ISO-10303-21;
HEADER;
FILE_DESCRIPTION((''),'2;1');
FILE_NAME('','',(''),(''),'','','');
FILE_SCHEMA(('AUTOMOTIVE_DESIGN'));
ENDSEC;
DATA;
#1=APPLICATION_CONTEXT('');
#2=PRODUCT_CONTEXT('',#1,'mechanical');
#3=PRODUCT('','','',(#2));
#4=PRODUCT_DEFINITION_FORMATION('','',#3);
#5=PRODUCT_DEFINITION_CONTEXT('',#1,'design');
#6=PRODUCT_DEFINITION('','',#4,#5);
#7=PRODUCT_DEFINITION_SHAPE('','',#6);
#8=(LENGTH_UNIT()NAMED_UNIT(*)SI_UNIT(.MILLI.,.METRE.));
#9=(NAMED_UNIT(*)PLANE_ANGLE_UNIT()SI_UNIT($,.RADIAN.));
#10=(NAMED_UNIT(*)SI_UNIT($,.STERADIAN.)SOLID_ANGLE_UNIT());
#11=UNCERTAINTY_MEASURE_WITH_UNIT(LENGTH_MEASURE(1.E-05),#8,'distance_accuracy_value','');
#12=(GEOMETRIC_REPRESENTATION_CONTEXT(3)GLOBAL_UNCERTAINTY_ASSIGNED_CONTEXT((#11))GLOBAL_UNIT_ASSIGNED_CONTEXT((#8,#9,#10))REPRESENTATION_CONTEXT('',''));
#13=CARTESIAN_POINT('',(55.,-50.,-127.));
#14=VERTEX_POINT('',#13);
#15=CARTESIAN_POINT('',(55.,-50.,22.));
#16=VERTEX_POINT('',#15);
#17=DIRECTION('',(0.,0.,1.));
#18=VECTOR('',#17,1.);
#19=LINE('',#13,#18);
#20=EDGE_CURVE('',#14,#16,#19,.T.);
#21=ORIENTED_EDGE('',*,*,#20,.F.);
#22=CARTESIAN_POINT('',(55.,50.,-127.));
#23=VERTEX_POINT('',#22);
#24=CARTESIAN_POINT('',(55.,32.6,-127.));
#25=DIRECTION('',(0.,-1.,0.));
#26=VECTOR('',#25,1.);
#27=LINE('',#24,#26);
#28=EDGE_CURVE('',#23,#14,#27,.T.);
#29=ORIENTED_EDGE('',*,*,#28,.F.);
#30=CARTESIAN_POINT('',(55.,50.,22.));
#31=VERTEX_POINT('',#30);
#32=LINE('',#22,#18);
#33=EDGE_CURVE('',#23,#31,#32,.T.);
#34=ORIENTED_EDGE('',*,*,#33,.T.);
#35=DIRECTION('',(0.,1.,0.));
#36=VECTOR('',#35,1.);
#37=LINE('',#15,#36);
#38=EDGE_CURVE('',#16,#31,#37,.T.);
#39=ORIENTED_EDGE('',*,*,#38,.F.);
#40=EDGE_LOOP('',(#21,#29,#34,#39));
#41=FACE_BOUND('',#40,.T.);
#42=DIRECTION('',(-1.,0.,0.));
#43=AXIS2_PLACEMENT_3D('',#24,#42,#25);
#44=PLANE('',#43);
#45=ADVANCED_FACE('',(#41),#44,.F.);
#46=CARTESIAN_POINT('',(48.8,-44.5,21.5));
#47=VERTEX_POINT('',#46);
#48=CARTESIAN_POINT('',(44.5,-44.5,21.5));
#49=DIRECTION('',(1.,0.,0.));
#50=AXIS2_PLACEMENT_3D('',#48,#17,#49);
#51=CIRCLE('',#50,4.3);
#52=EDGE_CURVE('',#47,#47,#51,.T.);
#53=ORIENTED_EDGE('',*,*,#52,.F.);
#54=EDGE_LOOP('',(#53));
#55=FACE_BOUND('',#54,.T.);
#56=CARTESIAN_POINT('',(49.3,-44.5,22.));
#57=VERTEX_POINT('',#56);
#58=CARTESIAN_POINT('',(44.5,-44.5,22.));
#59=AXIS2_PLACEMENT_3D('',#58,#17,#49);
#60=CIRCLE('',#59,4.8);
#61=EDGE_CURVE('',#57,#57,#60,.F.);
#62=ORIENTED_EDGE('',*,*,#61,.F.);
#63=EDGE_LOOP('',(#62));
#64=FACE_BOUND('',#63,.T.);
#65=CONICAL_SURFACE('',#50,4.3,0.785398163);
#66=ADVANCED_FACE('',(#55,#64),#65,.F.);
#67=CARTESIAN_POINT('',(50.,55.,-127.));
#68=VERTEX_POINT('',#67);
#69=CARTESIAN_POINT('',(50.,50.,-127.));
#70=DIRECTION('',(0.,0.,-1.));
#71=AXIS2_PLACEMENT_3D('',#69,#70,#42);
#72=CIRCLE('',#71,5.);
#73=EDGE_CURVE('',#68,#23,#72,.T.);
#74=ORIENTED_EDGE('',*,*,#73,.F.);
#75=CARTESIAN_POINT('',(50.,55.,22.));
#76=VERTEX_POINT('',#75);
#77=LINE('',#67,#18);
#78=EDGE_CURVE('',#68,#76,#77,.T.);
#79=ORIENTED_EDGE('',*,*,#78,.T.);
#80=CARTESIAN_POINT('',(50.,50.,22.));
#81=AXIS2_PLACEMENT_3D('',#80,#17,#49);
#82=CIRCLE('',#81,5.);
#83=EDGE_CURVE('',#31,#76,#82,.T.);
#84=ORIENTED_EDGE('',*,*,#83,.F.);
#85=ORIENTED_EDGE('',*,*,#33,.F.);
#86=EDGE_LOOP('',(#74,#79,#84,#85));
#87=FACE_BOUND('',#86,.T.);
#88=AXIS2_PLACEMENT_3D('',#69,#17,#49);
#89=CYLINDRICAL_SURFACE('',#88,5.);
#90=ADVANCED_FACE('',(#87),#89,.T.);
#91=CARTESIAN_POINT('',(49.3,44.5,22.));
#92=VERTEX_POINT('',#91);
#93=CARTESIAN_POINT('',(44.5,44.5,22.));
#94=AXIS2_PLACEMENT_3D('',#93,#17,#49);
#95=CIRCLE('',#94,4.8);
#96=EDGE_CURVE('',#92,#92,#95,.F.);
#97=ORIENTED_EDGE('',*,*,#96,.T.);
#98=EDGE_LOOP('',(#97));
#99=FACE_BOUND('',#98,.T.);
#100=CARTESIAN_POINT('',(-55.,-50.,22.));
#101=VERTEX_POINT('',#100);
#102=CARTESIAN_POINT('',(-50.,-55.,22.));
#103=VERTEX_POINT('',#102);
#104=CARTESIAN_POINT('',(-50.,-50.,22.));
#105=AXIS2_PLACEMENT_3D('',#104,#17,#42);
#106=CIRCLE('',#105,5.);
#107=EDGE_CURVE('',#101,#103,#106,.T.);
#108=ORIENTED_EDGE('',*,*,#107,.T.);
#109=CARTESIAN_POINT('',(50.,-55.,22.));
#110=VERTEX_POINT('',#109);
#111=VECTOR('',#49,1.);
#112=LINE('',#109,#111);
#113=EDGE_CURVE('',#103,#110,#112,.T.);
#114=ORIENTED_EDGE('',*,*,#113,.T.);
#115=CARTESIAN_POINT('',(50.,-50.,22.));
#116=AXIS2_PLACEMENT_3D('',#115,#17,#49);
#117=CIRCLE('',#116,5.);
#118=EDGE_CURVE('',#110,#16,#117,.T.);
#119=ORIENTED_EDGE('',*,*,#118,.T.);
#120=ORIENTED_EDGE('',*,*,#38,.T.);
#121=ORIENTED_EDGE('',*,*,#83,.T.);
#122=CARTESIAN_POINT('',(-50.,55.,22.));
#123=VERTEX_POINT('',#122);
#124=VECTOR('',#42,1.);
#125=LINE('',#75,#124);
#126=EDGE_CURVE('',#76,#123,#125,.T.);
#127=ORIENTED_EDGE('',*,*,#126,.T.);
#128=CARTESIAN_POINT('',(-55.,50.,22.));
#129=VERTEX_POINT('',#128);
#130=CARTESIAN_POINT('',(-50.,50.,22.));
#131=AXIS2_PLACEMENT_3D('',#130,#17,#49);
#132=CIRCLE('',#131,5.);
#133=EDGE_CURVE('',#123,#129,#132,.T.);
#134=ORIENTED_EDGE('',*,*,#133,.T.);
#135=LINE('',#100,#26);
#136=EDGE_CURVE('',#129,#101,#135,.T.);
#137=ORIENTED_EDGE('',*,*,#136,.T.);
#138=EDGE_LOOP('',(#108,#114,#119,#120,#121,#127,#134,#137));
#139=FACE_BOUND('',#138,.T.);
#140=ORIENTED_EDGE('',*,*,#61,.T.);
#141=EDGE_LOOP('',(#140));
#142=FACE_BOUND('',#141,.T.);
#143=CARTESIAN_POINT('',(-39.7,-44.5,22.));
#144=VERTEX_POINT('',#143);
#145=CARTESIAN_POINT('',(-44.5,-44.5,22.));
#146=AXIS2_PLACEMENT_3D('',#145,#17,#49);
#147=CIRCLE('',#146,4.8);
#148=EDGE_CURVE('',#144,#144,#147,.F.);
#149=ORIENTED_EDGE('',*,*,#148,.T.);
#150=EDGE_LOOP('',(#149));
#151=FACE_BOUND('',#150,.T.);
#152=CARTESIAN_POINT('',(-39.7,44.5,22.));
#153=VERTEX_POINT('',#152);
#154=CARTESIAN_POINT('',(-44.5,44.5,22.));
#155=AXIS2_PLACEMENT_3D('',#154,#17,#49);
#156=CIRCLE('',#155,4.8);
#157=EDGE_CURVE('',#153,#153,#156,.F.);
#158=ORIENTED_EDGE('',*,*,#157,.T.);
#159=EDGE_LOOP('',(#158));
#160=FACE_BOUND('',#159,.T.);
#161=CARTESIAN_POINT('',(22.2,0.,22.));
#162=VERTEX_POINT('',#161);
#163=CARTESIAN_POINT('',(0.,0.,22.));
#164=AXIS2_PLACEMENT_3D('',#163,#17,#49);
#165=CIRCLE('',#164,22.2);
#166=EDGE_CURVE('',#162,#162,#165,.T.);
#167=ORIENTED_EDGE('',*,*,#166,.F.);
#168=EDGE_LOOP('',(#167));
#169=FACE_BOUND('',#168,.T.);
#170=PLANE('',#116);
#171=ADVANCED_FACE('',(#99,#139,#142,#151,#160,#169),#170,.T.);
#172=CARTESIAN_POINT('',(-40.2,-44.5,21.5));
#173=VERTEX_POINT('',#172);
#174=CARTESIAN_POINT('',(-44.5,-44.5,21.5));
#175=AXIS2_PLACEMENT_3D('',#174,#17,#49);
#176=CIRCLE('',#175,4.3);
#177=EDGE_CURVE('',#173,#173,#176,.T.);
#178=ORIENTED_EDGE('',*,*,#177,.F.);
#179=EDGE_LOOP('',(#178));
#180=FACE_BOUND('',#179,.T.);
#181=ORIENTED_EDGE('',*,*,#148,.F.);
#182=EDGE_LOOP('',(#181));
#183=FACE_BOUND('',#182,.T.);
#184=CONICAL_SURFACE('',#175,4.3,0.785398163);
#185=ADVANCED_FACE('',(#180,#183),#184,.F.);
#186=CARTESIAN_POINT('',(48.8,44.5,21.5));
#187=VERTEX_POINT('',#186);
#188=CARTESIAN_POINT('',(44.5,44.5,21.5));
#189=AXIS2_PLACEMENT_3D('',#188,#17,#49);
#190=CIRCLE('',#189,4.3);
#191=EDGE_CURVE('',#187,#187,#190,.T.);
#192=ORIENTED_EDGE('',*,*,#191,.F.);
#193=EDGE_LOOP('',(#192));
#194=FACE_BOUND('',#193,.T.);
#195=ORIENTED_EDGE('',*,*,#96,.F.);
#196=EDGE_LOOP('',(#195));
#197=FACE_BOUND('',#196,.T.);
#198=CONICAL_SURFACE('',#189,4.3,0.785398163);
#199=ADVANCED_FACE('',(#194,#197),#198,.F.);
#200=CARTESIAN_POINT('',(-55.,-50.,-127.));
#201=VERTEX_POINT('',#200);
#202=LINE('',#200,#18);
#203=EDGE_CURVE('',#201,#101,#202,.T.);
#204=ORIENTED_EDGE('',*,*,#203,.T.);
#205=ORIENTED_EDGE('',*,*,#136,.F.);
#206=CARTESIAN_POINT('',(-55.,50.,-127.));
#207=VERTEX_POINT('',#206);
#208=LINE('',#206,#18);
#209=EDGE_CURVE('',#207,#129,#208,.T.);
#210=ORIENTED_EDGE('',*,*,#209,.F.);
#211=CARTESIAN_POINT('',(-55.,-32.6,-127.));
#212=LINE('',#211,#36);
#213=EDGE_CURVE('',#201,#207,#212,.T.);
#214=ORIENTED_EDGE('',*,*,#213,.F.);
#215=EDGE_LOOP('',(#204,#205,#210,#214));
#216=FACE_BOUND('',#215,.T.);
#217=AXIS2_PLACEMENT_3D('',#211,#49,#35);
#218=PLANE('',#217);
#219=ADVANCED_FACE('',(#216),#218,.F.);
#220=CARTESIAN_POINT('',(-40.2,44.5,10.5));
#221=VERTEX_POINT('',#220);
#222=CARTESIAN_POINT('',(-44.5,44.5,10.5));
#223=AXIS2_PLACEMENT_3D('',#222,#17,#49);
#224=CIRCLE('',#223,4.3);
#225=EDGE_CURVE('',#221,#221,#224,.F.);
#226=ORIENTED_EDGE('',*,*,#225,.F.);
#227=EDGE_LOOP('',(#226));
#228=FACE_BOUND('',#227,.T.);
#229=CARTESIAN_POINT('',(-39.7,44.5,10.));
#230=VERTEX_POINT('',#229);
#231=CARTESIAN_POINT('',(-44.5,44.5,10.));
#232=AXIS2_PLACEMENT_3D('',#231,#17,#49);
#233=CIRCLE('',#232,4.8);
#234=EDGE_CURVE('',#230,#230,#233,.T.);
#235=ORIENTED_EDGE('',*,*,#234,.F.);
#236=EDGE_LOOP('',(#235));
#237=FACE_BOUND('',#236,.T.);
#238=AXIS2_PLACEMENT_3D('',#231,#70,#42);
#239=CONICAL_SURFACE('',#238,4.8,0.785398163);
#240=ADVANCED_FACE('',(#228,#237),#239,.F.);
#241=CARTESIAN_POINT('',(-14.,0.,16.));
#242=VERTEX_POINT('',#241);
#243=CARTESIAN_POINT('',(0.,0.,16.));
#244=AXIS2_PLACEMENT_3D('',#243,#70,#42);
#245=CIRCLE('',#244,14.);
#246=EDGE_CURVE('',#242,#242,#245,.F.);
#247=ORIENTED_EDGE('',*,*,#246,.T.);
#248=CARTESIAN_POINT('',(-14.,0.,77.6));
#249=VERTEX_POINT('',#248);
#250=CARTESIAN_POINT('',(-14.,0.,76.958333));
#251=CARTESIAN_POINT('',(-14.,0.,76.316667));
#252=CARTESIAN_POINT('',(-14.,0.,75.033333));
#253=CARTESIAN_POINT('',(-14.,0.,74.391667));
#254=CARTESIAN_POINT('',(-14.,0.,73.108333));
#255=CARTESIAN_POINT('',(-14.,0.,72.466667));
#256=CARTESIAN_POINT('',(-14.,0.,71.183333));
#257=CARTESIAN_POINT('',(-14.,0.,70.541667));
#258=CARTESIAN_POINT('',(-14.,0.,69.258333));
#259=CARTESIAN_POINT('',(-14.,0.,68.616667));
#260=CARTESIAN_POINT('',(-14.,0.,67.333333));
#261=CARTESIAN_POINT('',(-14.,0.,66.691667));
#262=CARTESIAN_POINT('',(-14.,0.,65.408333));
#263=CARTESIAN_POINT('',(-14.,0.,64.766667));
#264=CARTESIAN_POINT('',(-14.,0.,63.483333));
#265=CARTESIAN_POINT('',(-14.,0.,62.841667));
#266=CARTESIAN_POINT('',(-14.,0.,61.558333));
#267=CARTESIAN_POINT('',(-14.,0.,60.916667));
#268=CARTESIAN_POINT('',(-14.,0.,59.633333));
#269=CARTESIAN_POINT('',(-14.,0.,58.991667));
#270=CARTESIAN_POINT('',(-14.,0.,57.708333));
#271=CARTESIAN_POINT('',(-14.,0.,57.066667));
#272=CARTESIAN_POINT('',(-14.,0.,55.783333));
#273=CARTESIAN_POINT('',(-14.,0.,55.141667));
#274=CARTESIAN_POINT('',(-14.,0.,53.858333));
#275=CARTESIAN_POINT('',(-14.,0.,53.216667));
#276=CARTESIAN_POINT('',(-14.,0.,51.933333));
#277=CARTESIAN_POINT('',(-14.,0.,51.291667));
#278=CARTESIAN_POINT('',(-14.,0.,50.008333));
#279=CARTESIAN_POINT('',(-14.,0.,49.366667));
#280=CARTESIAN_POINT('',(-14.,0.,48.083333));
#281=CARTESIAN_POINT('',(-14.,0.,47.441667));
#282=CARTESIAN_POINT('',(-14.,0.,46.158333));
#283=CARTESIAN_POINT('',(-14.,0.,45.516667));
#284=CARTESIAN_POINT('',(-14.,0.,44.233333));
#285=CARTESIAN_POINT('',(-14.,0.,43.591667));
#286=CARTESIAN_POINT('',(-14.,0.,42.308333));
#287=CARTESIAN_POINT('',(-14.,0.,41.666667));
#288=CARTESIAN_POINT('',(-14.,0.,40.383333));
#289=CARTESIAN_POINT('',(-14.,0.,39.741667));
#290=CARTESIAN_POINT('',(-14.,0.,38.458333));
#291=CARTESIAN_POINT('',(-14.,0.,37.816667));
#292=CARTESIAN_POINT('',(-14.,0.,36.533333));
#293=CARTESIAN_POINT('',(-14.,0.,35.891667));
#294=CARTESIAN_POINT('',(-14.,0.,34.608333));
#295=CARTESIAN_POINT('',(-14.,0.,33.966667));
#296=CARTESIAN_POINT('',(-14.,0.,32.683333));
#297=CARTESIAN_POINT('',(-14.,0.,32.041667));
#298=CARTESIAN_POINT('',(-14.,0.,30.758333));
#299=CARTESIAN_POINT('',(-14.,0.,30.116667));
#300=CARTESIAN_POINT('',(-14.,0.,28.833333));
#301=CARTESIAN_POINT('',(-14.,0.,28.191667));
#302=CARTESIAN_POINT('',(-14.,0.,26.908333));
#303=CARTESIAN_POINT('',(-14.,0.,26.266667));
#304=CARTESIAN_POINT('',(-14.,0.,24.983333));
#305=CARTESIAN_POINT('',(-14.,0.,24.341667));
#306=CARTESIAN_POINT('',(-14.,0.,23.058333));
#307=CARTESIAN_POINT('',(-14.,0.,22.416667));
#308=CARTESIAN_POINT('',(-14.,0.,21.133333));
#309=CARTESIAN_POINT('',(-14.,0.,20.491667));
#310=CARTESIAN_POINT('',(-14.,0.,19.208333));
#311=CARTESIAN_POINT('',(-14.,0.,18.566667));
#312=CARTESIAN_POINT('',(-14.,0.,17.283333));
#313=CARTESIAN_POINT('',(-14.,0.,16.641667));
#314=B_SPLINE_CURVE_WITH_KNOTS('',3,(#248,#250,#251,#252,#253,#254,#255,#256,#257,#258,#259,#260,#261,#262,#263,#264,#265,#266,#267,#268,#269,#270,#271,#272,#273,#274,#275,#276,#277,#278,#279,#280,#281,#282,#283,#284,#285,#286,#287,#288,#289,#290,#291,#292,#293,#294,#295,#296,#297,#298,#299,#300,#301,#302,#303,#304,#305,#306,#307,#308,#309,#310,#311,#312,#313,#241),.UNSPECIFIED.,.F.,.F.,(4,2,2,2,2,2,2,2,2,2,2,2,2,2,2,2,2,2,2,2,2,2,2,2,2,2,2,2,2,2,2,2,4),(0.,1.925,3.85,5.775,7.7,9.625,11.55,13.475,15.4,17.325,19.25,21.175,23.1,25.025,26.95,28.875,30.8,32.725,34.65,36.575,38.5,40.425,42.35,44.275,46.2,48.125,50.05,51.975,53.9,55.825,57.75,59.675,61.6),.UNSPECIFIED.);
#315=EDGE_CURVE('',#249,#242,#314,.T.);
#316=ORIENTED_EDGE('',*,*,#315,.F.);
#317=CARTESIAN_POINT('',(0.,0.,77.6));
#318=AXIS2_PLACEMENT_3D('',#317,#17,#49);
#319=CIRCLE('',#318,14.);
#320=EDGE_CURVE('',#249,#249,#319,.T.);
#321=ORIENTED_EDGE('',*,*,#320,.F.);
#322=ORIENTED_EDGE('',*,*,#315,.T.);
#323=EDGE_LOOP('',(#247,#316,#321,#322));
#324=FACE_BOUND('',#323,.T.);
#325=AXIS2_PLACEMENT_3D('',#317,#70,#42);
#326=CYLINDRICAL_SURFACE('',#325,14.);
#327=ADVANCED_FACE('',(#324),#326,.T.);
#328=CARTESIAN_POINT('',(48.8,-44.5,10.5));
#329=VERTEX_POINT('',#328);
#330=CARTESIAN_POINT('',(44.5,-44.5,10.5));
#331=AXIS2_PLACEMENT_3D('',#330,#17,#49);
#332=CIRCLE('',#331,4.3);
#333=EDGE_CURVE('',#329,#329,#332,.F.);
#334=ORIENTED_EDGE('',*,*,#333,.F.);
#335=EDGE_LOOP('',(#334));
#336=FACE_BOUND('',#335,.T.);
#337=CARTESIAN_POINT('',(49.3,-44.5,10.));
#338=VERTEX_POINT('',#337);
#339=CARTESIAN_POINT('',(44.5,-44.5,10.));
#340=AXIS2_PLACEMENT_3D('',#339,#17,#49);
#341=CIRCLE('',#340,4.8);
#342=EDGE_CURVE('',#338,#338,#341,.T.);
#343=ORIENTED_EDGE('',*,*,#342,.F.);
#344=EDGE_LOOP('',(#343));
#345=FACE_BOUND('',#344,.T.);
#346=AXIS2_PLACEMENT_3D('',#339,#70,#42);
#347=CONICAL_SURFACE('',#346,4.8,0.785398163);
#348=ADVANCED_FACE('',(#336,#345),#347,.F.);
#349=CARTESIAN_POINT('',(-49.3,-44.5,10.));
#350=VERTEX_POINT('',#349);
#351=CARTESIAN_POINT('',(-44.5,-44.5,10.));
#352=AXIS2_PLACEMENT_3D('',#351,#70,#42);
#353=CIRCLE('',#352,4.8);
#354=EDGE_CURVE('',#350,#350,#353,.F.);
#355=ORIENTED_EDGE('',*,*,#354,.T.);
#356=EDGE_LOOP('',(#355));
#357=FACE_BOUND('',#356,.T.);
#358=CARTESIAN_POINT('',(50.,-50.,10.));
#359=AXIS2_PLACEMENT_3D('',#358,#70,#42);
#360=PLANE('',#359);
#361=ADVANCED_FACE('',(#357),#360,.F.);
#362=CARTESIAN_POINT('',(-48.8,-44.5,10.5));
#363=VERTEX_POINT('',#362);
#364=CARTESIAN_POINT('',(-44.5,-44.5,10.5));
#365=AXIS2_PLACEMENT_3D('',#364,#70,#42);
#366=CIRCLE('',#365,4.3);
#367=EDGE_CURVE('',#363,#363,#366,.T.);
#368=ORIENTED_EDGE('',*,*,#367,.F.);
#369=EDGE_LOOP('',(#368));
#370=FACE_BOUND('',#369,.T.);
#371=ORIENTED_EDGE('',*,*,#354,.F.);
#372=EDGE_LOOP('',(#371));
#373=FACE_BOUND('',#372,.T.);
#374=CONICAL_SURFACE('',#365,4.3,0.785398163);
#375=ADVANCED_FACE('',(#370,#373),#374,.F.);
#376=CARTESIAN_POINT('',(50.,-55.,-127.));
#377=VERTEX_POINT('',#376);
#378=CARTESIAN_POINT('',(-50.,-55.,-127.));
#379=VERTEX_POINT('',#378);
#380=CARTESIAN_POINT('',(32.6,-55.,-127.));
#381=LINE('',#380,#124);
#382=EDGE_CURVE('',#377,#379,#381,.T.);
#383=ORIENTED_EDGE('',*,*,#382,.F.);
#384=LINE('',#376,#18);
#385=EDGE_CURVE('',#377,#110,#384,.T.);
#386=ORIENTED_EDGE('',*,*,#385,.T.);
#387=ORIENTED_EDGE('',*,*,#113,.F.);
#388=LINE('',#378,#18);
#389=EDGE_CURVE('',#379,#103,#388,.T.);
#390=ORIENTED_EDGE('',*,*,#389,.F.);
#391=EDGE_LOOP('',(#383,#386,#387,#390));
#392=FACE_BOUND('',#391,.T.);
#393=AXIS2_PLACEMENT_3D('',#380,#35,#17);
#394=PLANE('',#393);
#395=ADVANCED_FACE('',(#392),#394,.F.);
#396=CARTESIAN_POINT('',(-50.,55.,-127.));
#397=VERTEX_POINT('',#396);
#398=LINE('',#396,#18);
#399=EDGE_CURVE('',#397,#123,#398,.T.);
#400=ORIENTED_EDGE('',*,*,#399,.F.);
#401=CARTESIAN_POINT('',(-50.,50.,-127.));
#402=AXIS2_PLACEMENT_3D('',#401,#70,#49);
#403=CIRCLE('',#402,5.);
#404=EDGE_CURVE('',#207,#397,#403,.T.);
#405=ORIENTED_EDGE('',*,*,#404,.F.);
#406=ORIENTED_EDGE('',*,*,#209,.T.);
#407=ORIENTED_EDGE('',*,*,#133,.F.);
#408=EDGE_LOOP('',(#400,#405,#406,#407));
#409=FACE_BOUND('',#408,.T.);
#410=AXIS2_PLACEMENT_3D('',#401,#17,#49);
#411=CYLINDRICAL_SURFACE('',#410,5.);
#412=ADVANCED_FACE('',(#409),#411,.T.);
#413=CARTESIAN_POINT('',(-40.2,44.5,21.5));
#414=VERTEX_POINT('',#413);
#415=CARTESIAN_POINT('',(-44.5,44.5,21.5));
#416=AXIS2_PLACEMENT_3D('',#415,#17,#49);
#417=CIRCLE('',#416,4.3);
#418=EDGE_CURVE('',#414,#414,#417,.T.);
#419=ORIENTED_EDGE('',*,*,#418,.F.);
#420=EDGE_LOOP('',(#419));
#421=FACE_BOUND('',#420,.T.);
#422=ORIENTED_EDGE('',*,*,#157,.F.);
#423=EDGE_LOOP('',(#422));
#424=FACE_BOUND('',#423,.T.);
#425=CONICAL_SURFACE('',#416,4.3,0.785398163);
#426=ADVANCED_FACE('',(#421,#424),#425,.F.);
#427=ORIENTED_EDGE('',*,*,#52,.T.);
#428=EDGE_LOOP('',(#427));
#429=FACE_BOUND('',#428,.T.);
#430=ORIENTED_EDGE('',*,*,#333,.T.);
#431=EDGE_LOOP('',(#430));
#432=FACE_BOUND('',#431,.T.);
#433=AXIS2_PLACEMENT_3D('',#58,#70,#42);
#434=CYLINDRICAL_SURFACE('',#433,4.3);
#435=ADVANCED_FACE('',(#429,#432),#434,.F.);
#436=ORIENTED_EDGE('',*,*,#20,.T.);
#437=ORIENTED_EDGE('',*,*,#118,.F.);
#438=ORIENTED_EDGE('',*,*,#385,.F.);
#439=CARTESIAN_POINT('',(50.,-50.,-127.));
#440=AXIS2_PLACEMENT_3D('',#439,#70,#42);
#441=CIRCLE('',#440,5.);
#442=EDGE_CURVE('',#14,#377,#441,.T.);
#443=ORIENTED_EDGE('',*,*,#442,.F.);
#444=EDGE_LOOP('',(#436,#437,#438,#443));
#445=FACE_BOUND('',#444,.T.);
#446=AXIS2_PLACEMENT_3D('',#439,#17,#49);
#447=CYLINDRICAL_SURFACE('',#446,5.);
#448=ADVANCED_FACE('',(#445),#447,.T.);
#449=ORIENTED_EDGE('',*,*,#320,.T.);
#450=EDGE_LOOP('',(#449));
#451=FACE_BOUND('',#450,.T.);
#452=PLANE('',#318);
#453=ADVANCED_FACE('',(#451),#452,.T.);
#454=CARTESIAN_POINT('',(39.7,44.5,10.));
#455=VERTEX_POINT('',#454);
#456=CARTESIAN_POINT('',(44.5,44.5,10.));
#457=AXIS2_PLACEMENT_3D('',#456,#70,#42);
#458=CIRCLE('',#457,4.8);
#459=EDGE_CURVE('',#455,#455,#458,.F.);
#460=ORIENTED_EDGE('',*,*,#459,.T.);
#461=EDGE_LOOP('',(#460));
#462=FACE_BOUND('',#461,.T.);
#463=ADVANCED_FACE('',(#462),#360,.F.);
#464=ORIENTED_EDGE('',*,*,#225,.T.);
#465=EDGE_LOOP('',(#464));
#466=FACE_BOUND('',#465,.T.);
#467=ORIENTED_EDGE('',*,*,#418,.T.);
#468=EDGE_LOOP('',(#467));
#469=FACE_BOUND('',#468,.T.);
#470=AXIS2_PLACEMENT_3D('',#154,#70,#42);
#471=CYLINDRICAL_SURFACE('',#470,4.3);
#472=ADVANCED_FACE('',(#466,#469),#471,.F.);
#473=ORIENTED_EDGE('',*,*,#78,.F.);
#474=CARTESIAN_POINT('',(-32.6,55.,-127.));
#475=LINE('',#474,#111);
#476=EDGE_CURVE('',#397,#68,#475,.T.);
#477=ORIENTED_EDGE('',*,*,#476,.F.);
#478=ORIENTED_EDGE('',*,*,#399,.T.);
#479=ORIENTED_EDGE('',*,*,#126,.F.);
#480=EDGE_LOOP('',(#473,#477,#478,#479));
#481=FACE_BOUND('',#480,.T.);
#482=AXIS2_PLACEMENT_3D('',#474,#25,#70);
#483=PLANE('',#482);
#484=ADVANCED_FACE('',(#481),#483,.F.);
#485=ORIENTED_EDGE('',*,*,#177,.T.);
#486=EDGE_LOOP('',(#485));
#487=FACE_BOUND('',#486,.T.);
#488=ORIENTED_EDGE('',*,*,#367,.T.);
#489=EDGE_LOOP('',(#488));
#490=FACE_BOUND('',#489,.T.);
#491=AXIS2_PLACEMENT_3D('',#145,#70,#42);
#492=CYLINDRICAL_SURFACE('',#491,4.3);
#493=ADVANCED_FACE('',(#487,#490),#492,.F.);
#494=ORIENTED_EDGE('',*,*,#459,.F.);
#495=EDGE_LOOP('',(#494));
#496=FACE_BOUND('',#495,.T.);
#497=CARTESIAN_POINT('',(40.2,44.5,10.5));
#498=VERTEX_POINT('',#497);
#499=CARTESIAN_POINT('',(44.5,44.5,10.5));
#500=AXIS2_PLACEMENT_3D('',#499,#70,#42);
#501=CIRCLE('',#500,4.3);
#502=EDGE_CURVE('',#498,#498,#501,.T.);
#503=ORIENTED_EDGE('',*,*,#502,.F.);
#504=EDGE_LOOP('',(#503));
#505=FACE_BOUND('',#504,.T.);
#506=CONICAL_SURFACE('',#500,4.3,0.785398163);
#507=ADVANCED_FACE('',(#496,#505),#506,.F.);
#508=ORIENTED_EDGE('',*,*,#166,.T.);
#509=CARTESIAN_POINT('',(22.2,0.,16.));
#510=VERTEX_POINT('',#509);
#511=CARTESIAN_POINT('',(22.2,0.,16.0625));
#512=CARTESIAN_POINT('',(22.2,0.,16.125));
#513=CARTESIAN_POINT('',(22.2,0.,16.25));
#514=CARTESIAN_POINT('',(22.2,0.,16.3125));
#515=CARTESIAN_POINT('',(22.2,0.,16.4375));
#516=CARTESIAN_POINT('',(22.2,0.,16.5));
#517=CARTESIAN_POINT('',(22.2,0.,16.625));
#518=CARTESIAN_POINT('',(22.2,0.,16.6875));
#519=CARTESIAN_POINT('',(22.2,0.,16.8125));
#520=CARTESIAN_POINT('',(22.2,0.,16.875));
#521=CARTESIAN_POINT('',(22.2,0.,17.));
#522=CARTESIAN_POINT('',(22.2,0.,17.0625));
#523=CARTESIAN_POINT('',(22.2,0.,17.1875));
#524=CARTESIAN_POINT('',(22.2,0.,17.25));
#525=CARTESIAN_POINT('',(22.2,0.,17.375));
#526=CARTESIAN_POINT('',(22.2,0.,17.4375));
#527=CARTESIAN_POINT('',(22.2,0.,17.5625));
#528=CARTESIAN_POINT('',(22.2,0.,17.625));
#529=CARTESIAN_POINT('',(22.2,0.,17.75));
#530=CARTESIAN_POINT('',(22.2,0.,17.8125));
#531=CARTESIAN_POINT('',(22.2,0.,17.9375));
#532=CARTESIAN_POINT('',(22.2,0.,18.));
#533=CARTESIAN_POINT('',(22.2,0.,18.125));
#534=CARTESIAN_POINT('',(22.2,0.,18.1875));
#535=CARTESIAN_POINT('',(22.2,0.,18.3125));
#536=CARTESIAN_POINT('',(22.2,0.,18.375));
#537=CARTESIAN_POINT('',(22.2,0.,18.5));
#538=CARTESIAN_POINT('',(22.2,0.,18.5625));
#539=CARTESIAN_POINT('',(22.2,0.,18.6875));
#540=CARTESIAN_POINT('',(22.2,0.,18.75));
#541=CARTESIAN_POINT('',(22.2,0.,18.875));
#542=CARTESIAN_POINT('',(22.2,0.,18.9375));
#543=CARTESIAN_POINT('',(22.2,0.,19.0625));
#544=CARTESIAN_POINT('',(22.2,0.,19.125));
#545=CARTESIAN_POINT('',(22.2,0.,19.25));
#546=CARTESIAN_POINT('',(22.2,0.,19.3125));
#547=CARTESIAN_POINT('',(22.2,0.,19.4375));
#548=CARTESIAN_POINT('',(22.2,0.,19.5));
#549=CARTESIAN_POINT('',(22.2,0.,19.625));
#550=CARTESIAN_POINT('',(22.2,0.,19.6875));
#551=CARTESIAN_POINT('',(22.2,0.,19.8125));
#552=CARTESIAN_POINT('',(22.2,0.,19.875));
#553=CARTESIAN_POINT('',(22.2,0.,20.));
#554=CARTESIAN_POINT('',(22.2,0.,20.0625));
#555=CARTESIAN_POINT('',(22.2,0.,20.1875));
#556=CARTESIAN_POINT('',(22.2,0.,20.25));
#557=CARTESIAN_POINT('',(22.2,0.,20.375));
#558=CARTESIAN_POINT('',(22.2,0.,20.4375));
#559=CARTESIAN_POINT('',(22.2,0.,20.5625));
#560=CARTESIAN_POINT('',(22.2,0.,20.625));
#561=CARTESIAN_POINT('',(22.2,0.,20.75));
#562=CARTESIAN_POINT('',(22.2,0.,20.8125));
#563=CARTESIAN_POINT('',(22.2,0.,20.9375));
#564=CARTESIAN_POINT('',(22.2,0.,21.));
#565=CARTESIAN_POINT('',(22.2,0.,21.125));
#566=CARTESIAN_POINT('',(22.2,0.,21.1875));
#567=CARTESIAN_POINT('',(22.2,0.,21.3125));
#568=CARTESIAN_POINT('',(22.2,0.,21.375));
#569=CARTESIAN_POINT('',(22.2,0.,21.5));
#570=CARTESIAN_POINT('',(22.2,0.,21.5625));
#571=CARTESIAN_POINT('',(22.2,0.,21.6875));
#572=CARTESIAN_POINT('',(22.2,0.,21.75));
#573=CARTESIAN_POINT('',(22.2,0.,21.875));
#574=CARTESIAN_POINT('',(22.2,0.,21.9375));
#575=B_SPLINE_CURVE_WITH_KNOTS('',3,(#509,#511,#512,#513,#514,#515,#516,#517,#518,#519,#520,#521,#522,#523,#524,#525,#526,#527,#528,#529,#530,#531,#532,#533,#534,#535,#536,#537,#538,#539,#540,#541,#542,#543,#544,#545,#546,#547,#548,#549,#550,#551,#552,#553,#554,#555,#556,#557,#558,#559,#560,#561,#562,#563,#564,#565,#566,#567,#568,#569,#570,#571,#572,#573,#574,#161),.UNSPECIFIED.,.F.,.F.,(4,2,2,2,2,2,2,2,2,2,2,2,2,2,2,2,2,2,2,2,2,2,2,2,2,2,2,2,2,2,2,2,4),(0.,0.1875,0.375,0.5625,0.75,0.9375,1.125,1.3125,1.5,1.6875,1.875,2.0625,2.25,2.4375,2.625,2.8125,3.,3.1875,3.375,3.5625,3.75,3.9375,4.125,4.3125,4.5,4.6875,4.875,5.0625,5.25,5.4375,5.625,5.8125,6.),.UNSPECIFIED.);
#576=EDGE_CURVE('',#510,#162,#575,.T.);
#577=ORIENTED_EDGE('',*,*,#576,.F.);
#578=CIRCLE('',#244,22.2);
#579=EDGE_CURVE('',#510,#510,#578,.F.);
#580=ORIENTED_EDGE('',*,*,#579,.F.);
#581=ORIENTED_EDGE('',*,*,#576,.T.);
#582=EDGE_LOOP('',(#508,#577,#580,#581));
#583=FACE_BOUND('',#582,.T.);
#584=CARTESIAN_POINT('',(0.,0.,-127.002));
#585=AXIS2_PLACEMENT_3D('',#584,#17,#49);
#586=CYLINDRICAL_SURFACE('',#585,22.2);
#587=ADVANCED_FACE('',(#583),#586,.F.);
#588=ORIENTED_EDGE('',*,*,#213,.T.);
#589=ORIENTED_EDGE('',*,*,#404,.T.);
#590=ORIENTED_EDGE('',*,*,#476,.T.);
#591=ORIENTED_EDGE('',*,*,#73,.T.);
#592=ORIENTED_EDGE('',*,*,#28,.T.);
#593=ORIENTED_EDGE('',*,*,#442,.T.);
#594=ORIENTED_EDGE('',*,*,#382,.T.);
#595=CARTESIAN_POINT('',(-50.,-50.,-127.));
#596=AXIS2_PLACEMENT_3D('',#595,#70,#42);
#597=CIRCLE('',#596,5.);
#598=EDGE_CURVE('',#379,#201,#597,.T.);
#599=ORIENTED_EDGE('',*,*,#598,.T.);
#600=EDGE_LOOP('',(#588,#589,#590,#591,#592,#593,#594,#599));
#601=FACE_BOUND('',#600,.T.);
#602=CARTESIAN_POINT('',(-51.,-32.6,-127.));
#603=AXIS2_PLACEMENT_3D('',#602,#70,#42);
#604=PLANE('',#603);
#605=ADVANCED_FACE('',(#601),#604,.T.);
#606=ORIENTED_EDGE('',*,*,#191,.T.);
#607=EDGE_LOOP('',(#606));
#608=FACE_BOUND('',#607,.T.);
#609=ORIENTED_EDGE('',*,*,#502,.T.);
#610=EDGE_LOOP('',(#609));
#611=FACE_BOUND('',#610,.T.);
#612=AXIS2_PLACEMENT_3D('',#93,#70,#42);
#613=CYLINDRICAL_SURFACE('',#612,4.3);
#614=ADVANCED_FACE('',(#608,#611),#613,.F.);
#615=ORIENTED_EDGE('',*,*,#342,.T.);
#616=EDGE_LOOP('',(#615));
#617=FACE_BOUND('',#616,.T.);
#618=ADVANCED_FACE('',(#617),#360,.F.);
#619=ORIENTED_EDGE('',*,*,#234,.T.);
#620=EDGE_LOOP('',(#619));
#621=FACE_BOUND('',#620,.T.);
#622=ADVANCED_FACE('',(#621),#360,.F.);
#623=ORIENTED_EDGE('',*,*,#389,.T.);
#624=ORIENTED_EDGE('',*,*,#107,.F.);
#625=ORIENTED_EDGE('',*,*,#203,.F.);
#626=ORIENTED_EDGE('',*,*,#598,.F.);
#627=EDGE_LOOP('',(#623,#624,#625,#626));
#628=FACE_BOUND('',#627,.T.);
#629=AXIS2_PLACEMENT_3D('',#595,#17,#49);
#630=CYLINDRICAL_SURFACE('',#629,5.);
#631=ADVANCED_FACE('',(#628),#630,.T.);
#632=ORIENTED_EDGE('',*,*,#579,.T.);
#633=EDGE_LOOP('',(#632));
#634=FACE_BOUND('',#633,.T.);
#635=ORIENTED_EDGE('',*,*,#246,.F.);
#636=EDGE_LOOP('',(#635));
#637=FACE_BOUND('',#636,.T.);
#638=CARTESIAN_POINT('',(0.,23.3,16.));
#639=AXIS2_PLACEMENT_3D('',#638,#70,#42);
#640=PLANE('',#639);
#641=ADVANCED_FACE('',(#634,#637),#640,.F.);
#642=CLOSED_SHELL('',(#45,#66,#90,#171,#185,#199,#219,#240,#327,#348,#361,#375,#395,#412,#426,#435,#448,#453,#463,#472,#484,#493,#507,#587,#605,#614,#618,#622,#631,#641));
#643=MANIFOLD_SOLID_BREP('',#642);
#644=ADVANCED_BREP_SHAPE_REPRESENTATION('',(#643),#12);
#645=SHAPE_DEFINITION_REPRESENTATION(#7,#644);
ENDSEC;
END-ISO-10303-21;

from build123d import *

# Parameters (mm, degrees)
SKETCH1_R             = 4.3
BOSS_EXTRUDE1_DEPTH   = 22
CUT_EXTRUDE1_DEPTH    = 10
CHAMFER1_SIZE         = 0.5
CUT_EXTRUDE2_DEPTH    = 5.6
FILLET1_R             = 1.5
SKETCH6_R             = 27.775
BOSS_EXTRUDE2_DEPTH   = 1.9
SKETCH7_W             = 7.9
SKETCH7_H             = 13.3
SKETCH9_R             = 9.5
BOSS_EXTRUDE3_DEPTH   = 53.7
CHAMFER2_SIZE         = 1
SKETCH11_W            = 6
SKETCH11_H            = 7.2
CUT_EXTRUDE3_DEPTH    = 35
FILLET2_R             = 2.95
BOSS_EXTRUDE4_DEPTH   = 6
SKETCH13_R            = 1.269531582
CUT_EXTRUDE4_DEPTH    = 5
CHAMFER3_SIZE         = 0.5
CHAMFER3_SIZE2        = 1.743707222
CIRPATTERN2_COUNT     = 4
FILLET3_R             = 1.5
SKETCH14_R            = 4.5
BOSS_EXTRUDE5_DEPTH   = 3
FILLET4_R             = 0.5
CUT_EXTRUDE5_DEPTH    = 1.5
CHAMFER4_SIZE         = 1
CHAMFER4_SIZE2        = 2.475086853
CHAMFER4_PART_2_SIZE  = 1
CHAMFER4_PART_2_SIZE2 = 2.475086853
CHAMFER4_PART_3_SIZE  = 1
CHAMFER4_PART_3_SIZE2 = 2.475086853
CHAMFER4_PART_4_SIZE  = 1
CHAMFER4_PART_4_SIZE2 = 2.475086853
CIRPATTERN3_COUNT     = 4
BOSS_EXTRUDE6_DEPTH   = 107
BOSS_EXTRUDE7_DEPTH   = 20
SKETCH18_R            = 17.5
CUT_EXTRUDE6_DEPTH    = 4.6
BOSS_EXTRUDE8_DEPTH   = 2
SKETCH20_R            = 0.781757385
SKETCH20_R_2          = 0.755744111
SKETCH20_R_3          = 0.777591317
BOSS_EXTRUDE9_DEPTH   = 5
BOSS_EXTRUDE10_DEPTH  = 22
BOSS_EXTRUDE11_START  = 137
BOSS_EXTRUDE11_DEPTH  = 137
SKETCH25_W            = 37.737661344
SKETCH25_H            = 66.090824893
CUT_EXTRUDE9_DEPTH    = 53
BOSS_EXTRUDE12_START  = -1.9
SKETCH26_R            = 39.025696269
SKETCH26_R_2          = 23.3
BOSS_EXTRUDE12_DEPTH  = 1.9
SKETCH27_R            = 14
BOSS_EXTRUDE13_DEPTH  = 61.6
BOSS_EXTRUDE14_START  = -7.9
SKETCH28_R            = 23.3
SKETCH28_R_2          = 22.2
BOSS_EXTRUDE14_DEPTH  = 7.9
CUT_EXTRUDE10_START   = -1.9
SKETCH29_R            = 39.025696269
SKETCH29_R_2          = 22.2
CUT_EXTRUDE10_DEPTH   = 1.9
BOSS_EXTRUDE15_START  = -30
SKETCH30_R            = 31.1
SKETCH30_R_2          = 22.2
BOSS_EXTRUDE15_DEPTH  = 30


with BuildPart() as part:
    # Sketch1 → Boss-Extrude1 (new body)
    with BuildSketch(Plane.XY):
        with BuildLine():
            Line((50, -55), (-50, -55))
            ThreePointArc((-50, -55), (-53.535533906, -53.535533906), (-55, -50))
            Line((-55, -50), (-55, 50))
            ThreePointArc((-55, 50), (-53.535533906, 53.535533906), (-50, 55))
            Line((-50, 55), (50, 55))
            ThreePointArc((50, 55), (53.535533906, 53.535533906), (55, 50))
            Line((55, 50), (55, -50))
            ThreePointArc((55, -50), (53.535533906, -53.535533906), (50, -55))
        make_face()
        with Locations((-44.5, 44.5)):
            Circle(SKETCH1_R, mode=Mode.SUBTRACT)
        with Locations((44.5, 44.5)):
            Circle(SKETCH1_R, mode=Mode.SUBTRACT)
        with Locations((-44.5, -44.5)):
            Circle(SKETCH1_R, mode=Mode.SUBTRACT)
        with Locations((44.5, -44.5)):
            Circle(SKETCH1_R, mode=Mode.SUBTRACT)
    extrude(amount=BOSS_EXTRUDE1_DEPTH)

    # Sketch2 → Cut-Extrude1 (cut)
    with BuildSketch(Plane(origin=(0, 0, 0), x_dir=(-1, 0, 0), z_dir=(0, 0, -1))):
        with BuildLine():
            Line((-51, 36.6), (-43.6, 36.6))
            ThreePointArc((-43.6, 36.6), (-38.650252532, 38.650252532), (-36.6, 43.6))
            Line((-36.6, 43.6), (-36.6, 51))
            ThreePointArc((-36.6, 51), (-35.428427125, 53.828427125), (-32.6, 55))
            Line((-32.6, 55), (-50, 55))
            ThreePointArc((-50, 55), (-53.535533906, 53.535533906), (-55, 50))
            Line((-55, 50), (-55, 32.6))
            ThreePointArc((-55, 32.6), (-53.828427125, 35.428427125), (-51, 36.6))
        make_face()
        with BuildLine():
            Line((55, 50), (55, 32.6))
            ThreePointArc((55, 32.6), (53.828427125, 35.428427125), (51, 36.6))
            Line((51, 36.6), (43.6, 36.6))
            ThreePointArc((43.6, 36.6), (38.650252532, 38.650252532), (36.6, 43.6))
            Line((36.6, 43.6), (36.6, 51))
            ThreePointArc((36.6, 51), (35.428427125, 53.828427125), (32.6, 55))
            Line((32.6, 55), (50, 55))
            ThreePointArc((50, 55), (53.535533906, 53.535533906), (55, 50))
        make_face()
        with BuildLine():
            Line((51, -36.6), (43.6, -36.6))
            ThreePointArc((43.6, -36.6), (38.650252532, -38.650252532), (36.6, -43.6))
            Line((36.6, -43.6), (36.6, -51))
            ThreePointArc((36.6, -51), (35.428427125, -53.828427125), (32.6, -55))
            Line((32.6, -55), (50, -55))
            ThreePointArc((50, -55), (53.535533906, -53.535533906), (55, -50))
            Line((55, -50), (55, -32.6))
            ThreePointArc((55, -32.6), (53.828427125, -35.428427125), (51, -36.6))
        make_face()
        with BuildLine():
            Line((-55, -50), (-55, -32.6))
            ThreePointArc((-55, -32.6), (-53.828427125, -35.428427125), (-51, -36.6))
            Line((-51, -36.6), (-43.6, -36.6))
            ThreePointArc((-43.6, -36.6), (-38.650252532, -38.650252532), (-36.6, -43.6))
            Line((-36.6, -43.6), (-36.6, -51))
            ThreePointArc((-36.6, -51), (-35.428427125, -53.828427125), (-32.6, -55))
            Line((-32.6, -55), (-50, -55))
            ThreePointArc((-50, -55), (-53.535533906, -53.535533906), (-55, -50))
        make_face()
    extrude(amount=-CUT_EXTRUDE1_DEPTH, mode=Mode.SUBTRACT)

    # Chamfer1
    chamfer1_edges = [part.edges().sort_by_distance(p)[0] for p in [
        (-48.8, 44.5, 10),
        (-48.8, 44.5, 22),
        (40.2, 44.5, 22),
        (-48.8, -44.5, 22),
        (40.2, -44.5, 22),
        (40.2, -44.5, 10),
        (-48.8, -44.5, 10),
        (40.2, 44.5, 10),
    ]]
    chamfer(chamfer1_edges, length=CHAMFER1_SIZE)

    # Sketch3 → Cut-Extrude2 (cut)
    with BuildSketch(Plane.XY.offset(22)):
        with BuildLine():
            Line((-39, 50), (-39, 60.599803572))
            Line((-39, 60.599803572), (-25, 60.599803572))
            Line((-25, 60.599803572), (-25, 50))
            ThreePointArc((-25, 50), (-32, 43), (-39, 50))
        make_face()
    cut_extrude2 = extrude(amount=-CUT_EXTRUDE2_DEPTH, mode=Mode.SUBTRACT)

    # Fillet1
    fillet1_edges = [part.edges().sort_by_distance(p)[0] for p in [
        (-39, 55, 19.2),
        (-25, 55, 19.2),
    ]]
    fillet(fillet1_edges, radius=FILLET1_R)

    # Sketch6 → Boss-Extrude2 (add)
    with BuildSketch(Plane.XY.offset(22)):
        with Locations(Location((0, 0, 0), (0, 0, 180))):
            Circle(SKETCH6_R)
    extrude(amount=BOSS_EXTRUDE2_DEPTH)

    # Sketch7 → Cut-Revolve1 (revolve, cut)
    with BuildSketch(Plane(origin=(0, 0, 0), x_dir=(0, 0, -1), z_dir=(1, 0, 0)), mode=Mode.PRIVATE) as cut_revolve1_sk:
        Polygon((-22, 27.775), (-21.7, 27.775), (-21.7, 29.9), (-22, 31.1), align=None)
        with Locations((-19.95, 16.65)):
            Rectangle(SKETCH7_W, SKETCH7_H)
    revolve(cut_revolve1_sk.sketch.rotate(Axis((0, 0, 0), (0, 0, 1)), 90), axis=Axis((0, 0, 0), (0, 0, 1)), mode=Mode.SUBTRACT)

    # Sketch9 → Boss-Extrude3 (add)
    with BuildSketch(Plane.XY.offset(23.9)):
        with Locations(Location((0, 0, 0), (0, 0, 180))):
            Circle(SKETCH9_R)
    extrude(amount=BOSS_EXTRUDE3_DEPTH)

    # Chamfer2
    chamfer2_edges = [part.edges().sort_by_distance(p)[0] for p in [
        (9.5, 0, 77.6),
    ]]
    chamfer(chamfer2_edges, length=CHAMFER2_SIZE)

    # Sketch11 → Cut-Extrude3 (cut)
    with BuildSketch(Plane.XY.offset(77.6)):
        with Locations((0, 9.5)):
            Rectangle(SKETCH11_W, SKETCH11_H)
    extrude(amount=-CUT_EXTRUDE3_DEPTH, mode=Mode.SUBTRACT)

    # Fillet2
    fillet2_edges = [part.edges().sort_by_distance(p)[0] for p in [
        (-3, 7.456939094, 42.6),
        (3, 7.456939094, 42.6),
    ]]
    fillet(fillet2_edges, radius=FILLET2_R)

    # Sketch13 → Cut-Extrude4 (cut)
    with BuildSketch(Plane.XY.offset(77.6)):
        Circle(SKETCH13_R)
    extrude(amount=-CUT_EXTRUDE4_DEPTH, mode=Mode.SUBTRACT)

    # Chamfer3
    chamfer3_edges = [part.edges().sort_by_distance(p)[0] for p in [
        (-1.269531582, 0, 77.6),
    ]]
    chamfer3_side = [part.faces().sort_by_distance(p)[0] for p in [
        (-3.23657996, 6.92649343, 77.6),
    ]]
    chamfer(chamfer3_edges, length=CHAMFER3_SIZE, length2=CHAMFER3_SIZE2, reference=chamfer3_side[0])

    # CirPattern2: Cut-Extrude2 ×4 about axis
    cirpattern2_axis = Axis((0, 0, 0), (0, 0, 1))
    for i in range(1, CIRPATTERN2_COUNT):
        add(cut_extrude2.rotate(cirpattern2_axis, i * 360 / CIRPATTERN2_COUNT), mode=Mode.SUBTRACT)

    # Fillet3
    fillet3_edges = [part.edges().sort_by_distance(p)[0] for p in [
        (55, 25, 19.2),
        (55, 39, 19.2),
        (25, -55, 19.2),
        (39, -55, 19.2),
        (-55, -25, 19.2),
        (-55, -39, 19.2),
    ]]
    fillet(fillet3_edges, radius=FILLET3_R)



with BuildPart() as body_2:
    # Sketch12 → Boss-Extrude4 (new body)
    with BuildSketch(Plane(origin=(0, 5.9, 0), x_dir=(1, 0, 0), z_dir=(0, 1, 0))):
        with BuildLine():
            Line((2.95, -45.55), (2.95, -74.55))
            ThreePointArc((2.95, -74.55), (-0.05, -77.55), (-3.05, -74.55))
            Line((-3.05, -74.55), (-3.05, -45.55))
            ThreePointArc((-3.05, -45.55), (-0.05, -42.55), (2.95, -45.55))
        make_face()
    extrude(amount=BOSS_EXTRUDE4_DEPTH)


with BuildPart() as body_3:
    # Sketch14 → Boss-Extrude5 (new body)
    with BuildSketch(Plane.XY.offset(16.4)):
        with Locations((-32, 50)):
            Circle(SKETCH14_R)
    extrude(amount=BOSS_EXTRUDE5_DEPTH)

    # Fillet4
    fillet4_edges = [body_3.edges().sort_by_distance(p)[0] for p in [
        (-36.5, 50, 16.4),
        (-36.5, 50, 19.4),
    ]]
    fillet(fillet4_edges, radius=FILLET4_R)

    # Sketch15 → Cut-Extrude5 (cut)
    with BuildSketch(Plane.XY.offset(19.4)):
        Polygon((-31.205841701, 50.806748085), (-28.673829712, 50.806748085), (-28.673829712, 49.193251915), (-31.205841701, 49.193251915), (-31.205841701, 46.725736586), (-32.794158299, 46.725736586), (-32.794158299, 49.193251915), (-35.326170288, 49.193251915), (-35.326170288, 50.806748085), (-32.794158299, 50.806748085), (-32.794158299, 53.274263414), (-31.205841701, 53.274263414), align=None)
    extrude(amount=-CUT_EXTRUDE5_DEPTH, mode=Mode.SUBTRACT)

    # Chamfer4
    chamfer4_edges = [body_3.edges().sort_by_distance(p)[0] for p in [
        (-32, 46.725736586, 17.9),
    ]]
    chamfer4_side = [body_3.faces().sort_by_distance(p)[0] for p in [
        (-32, 46.725736586, 18.65),
    ]]
    chamfer(chamfer4_edges, length=CHAMFER4_SIZE, length2=CHAMFER4_SIZE2, reference=chamfer4_side[0])

    # Chamfer4 part 2
    chamfer4_part_2_edges = [body_3.edges().sort_by_distance(p)[0] for p in [
        (-32, 53.274263414, 17.9),
    ]]
    chamfer4_part_2_side = [body_3.faces().sort_by_distance(p)[0] for p in [
        (-32, 53.274263414, 18.65),
    ]]
    chamfer(chamfer4_part_2_edges, length=CHAMFER4_PART_2_SIZE, length2=CHAMFER4_PART_2_SIZE2, reference=chamfer4_part_2_side[0])

    # Chamfer4 part 3
    chamfer4_part_3_edges = [body_3.edges().sort_by_distance(p)[0] for p in [
        (-35.326170288, 50, 17.9),
    ]]
    chamfer4_part_3_side = [body_3.faces().sort_by_distance(p)[0] for p in [
        (-35.326170288, 50, 18.65),
    ]]
    chamfer(chamfer4_part_3_edges, length=CHAMFER4_PART_3_SIZE, length2=CHAMFER4_PART_3_SIZE2, reference=chamfer4_part_3_side[0])

    # Chamfer4 part 4
    chamfer4_part_4_edges = [body_3.edges().sort_by_distance(p)[0] for p in [
        (-28.673829712, 50, 17.9),
    ]]
    chamfer4_part_4_side = [body_3.faces().sort_by_distance(p)[0] for p in [
        (-28.673829712, 50, 18.65),
    ]]
    chamfer(chamfer4_part_4_edges, length=CHAMFER4_PART_4_SIZE, length2=CHAMFER4_PART_4_SIZE2, reference=chamfer4_part_4_side[0])


with BuildPart() as cirpattern3_1:
    # CirPattern3: pattern copy
    add(body_3.part.rotate(Axis((0, 0, 0), (0, 0, 1)), 1 * 360 / CIRPATTERN3_COUNT))


with BuildPart() as cirpattern3_2:
    # CirPattern3: pattern copy
    add(body_3.part.rotate(Axis((0, 0, 0), (0, 0, 1)), 2 * 360 / CIRPATTERN3_COUNT))


with BuildPart() as cirpattern3_3:
    # CirPattern3: pattern copy
    add(body_3.part.rotate(Axis((0, 0, 0), (0, 0, 1)), 3 * 360 / CIRPATTERN3_COUNT))


with BuildPart() as body_7:
    # Sketch16 → Boss-Extrude6 (new body)
    with BuildSketch(Plane(origin=(0, 0, 0), x_dir=(-1, 0, 0), z_dir=(0, 0, -1))):
        with BuildLine():
            Line((55, -32.6), (55, 32.6))
            ThreePointArc((55, 32.6), (53.828427125, 35.428427125), (51, 36.6))
            Line((51, 36.6), (43.6, 36.6))
            ThreePointArc((43.6, 36.6), (38.650252532, 38.650252532), (36.6, 43.6))
            Line((36.6, 43.6), (36.6, 51))
            ThreePointArc((36.6, 51), (35.428427125, 53.828427125), (32.6, 55))
            Line((32.6, 55), (-32.6, 55))
            ThreePointArc((-32.6, 55), (-35.428427125, 53.828427125), (-36.6, 51))
            Line((-36.6, 51), (-36.6, 43.6))
            ThreePointArc((-36.6, 43.6), (-38.650252532, 38.650252532), (-43.6, 36.6))
            Line((-43.6, 36.6), (-51, 36.6))
            ThreePointArc((-51, 36.6), (-53.828427125, 35.428427125), (-55, 32.6))
            Line((-55, 32.6), (-55, -32.6))
            ThreePointArc((-55, -32.6), (-53.828427125, -35.428427125), (-51, -36.6))
            Line((-51, -36.6), (-43.6, -36.6))
            ThreePointArc((-43.6, -36.6), (-38.650252532, -38.650252532), (-36.6, -43.6))
            Line((-36.6, -43.6), (-36.6, -51))
            ThreePointArc((-36.6, -51), (-35.428427125, -53.828427125), (-32.6, -55))
            Line((-32.6, -55), (32.6, -55))
            ThreePointArc((32.6, -55), (35.428427125, -53.828427125), (36.6, -51))
            Line((36.6, -51), (36.6, -43.6))
            ThreePointArc((36.6, -43.6), (38.650252532, -38.650252532), (43.6, -36.6))
            Line((43.6, -36.6), (51, -36.6))
            ThreePointArc((51, -36.6), (53.828427125, -35.428427125), (55, -32.6))
        make_face()
    extrude(amount=BOSS_EXTRUDE6_DEPTH)


with BuildPart() as body_8:
    # Sketch17 → Boss-Extrude7 (new body)
    with BuildSketch(Plane(origin=(0, 0, -107), x_dir=(-1, 0, 0), z_dir=(0, 0, -1))):
        with BuildLine():
            Line((55, -32.6), (55, 32.6))
            ThreePointArc((55, 32.6), (53.828427125, 35.428427125), (51, 36.6))
            Line((51, 36.6), (43.6, 36.6))
            ThreePointArc((43.6, 36.6), (38.650252532, 38.650252532), (36.6, 43.6))
            Line((36.6, 43.6), (36.6, 51))
            ThreePointArc((36.6, 51), (35.428427125, 53.828427125), (32.6, 55))
            Line((32.6, 55), (-32.6, 55))
            ThreePointArc((-32.6, 55), (-35.428427125, 53.828427125), (-36.6, 51))
            Line((-36.6, 51), (-36.6, 43.6))
            ThreePointArc((-36.6, 43.6), (-38.650252532, 38.650252532), (-43.6, 36.6))
            Line((-43.6, 36.6), (-51, 36.6))
            ThreePointArc((-51, 36.6), (-53.828427125, 35.428427125), (-55, 32.6))
            Line((-55, 32.6), (-55, -32.6))
            ThreePointArc((-55, -32.6), (-53.828427125, -35.428427125), (-51, -36.6))
            Line((-51, -36.6), (-43.6, -36.6))
            ThreePointArc((-43.6, -36.6), (-38.650252532, -38.650252532), (-36.6, -43.6))
            Line((-36.6, -43.6), (-36.6, -51))
            ThreePointArc((-36.6, -51), (-35.428427125, -53.828427125), (-32.6, -55))
            Line((-32.6, -55), (32.6, -55))
            ThreePointArc((32.6, -55), (35.428427125, -53.828427125), (36.6, -51))
            Line((36.6, -51), (36.6, -43.6))
            ThreePointArc((36.6, -43.6), (38.650252532, -38.650252532), (43.6, -36.6))
            Line((43.6, -36.6), (51, -36.6))
            ThreePointArc((51, -36.6), (53.828427125, -35.428427125), (55, -32.6))
        make_face()
    extrude(amount=BOSS_EXTRUDE7_DEPTH)

    # Sketch18 → Cut-Extrude6 (cut)
    with BuildSketch(Plane(origin=(0, 0, -127), x_dir=(-1, 0, 0), z_dir=(0, 0, -1))):
        Circle(SKETCH18_R)
    extrude(amount=-CUT_EXTRUDE6_DEPTH, mode=Mode.SUBTRACT)


with BuildPart() as body_9:
    # Sketch19 → Boss-Extrude8 (new body)
    with BuildSketch(Plane(origin=(0, 55, 0), x_dir=(1, 0, 0), z_dir=(0, 1, 0))):
        with BuildLine():
            Line((-7, 119.5319481), (-7, 106.5319481))
            Line((-7, 106.5319481), (7, 106.5319481))
            Line((7, 106.5319481), (7, 119.5319481))
            ThreePointArc((7, 119.5319481), (0, 126.5319481), (-7, 119.5319481))
        make_face()
    extrude(amount=BOSS_EXTRUDE8_DEPTH)

    # Sketch20 → Boss-Extrude9 (add)
    with BuildSketch(Plane(origin=(0, 57, 0), x_dir=(1, 0, 0), z_dir=(0, 1, 0))):
        with Locations(Location((-1.527965291, 111.959324304, 0), (0, 0, 270))):
            Circle(SKETCH20_R)
        with Locations(Location((0, 111.177566919, 0), (0, 0, 270))):
            Circle(SKETCH20_R)
        with Locations(Location((1.06638621, 112.393181791, 0), (0, 0, 270))):
            Circle(SKETCH20_R_2)
        with Locations(Location((0.985840453, 109.917406178, 0), (0, 0, 270))):
            Circle(SKETCH20_R_3)
    extrude(amount=BOSS_EXTRUDE9_DEPTH)


with BuildPart() as part_1:
    add(part.part)

    add(body_3.part)  # Boss-Extrude10 merges body 3

    add(cirpattern3_1.part)  # Boss-Extrude10 merges CirPattern3_1

    add(cirpattern3_2.part)  # Boss-Extrude10 merges CirPattern3_2

    add(cirpattern3_3.part)  # Boss-Extrude10 merges CirPattern3_3

    add(body_7.part)  # Boss-Extrude10 merges body 7
    # Sketch22 → Boss-Extrude10 (add)
    with BuildSketch(Plane.XY.offset(22)):
        Polygon((-15.060402007, 38.994521077), (-31.516759856, 38.994521077), (-45.25, 52.727761221), (-45.25, 55), (-15.060402007, 55), align=None)
        Polygon((36.525802568, -39.365731509), (15.868239662, -39.365731509), (15.868239662, -55), (42.988503812, -55), align=None)
        Polygon((-55, -20.208438535), (-35.602559533, -20.208438535), (-35.602559533, -34.634110956), (-55, -43.058703649), align=None)
        Polygon((36.525802568, 33.10884673), (55, 45.25), (55, 16.83668824), align=None)
    extrude(amount=-BOSS_EXTRUDE10_DEPTH)


    add(body_8.part)  # Boss-Extrude11 merges body 8

    add(body_9.part)  # Boss-Extrude11 merges body 9
    # Sketch23 → Boss-Extrude11 (add)
    with BuildSketch(Plane(origin=(0, 0, 10), x_dir=(-1, 0, 0), z_dir=(0, 0, -1)).offset(BOSS_EXTRUDE11_START)):
        with BuildLine():
            Line((-50, 55), (50, 55))
            ThreePointArc((50, 55), (53.535533906, 53.535533906), (55, 50))
            Line((55, 50), (55, -50))
            ThreePointArc((55, -50), (53.535533906, -53.535533906), (50, -55))
            Line((50, -55), (-50, -55))
            ThreePointArc((-50, -55), (-53.535533906, -53.535533906), (-55, -50))
            Line((-55, -50), (-55, 50))
            ThreePointArc((-55, 50), (-53.535533906, 53.535533906), (-50, 55))
        make_face()
    extrude(amount=-BOSS_EXTRUDE11_DEPTH)

    # Sketch25 → Cut-Extrude9 (cut)
    with BuildSketch(Plane(origin=(0, 55, 0), x_dir=(1, 0, 0), z_dir=(0, 1, 0))):
        with Locations((1.397691161, 98.078785947)):
            Rectangle(SKETCH25_W, SKETCH25_H)
    extrude(amount=CUT_EXTRUDE9_DEPTH, mode=Mode.SUBTRACT)

    # Sketch26 → Boss-Extrude12 (add)
    with BuildSketch(Plane.XY.offset(23.9).offset(BOSS_EXTRUDE12_START)):
        Circle(SKETCH26_R)
        with Locations(Location((0, 0, 0), (0, 0, 180))):
            Circle(SKETCH26_R_2, mode=Mode.SUBTRACT)
    extrude(amount=BOSS_EXTRUDE12_DEPTH)


    add(body_2.part)  # Boss-Extrude13 merges body 2
    # Sketch27 → Boss-Extrude13 (add)
    with BuildSketch(Plane.XY.offset(16)):
        with Locations(Location((0, 0, 0), (0, 0, 180))):
            Circle(SKETCH27_R)
    extrude(amount=BOSS_EXTRUDE13_DEPTH)

    # Sketch28 → Boss-Extrude14 (add)
    with BuildSketch(Plane.XY.offset(23.9).offset(BOSS_EXTRUDE14_START)):
        Circle(SKETCH28_R)
        Circle(SKETCH28_R_2, mode=Mode.SUBTRACT)
    extrude(amount=BOSS_EXTRUDE14_DEPTH)

    # Sketch29 → Cut-Extrude10 (cut)
    with BuildSketch(Plane.XY.offset(23.9).offset(CUT_EXTRUDE10_START)):
        Circle(SKETCH29_R)
        Circle(SKETCH29_R_2, mode=Mode.SUBTRACT)
    extrude(amount=CUT_EXTRUDE10_DEPTH, mode=Mode.SUBTRACT)

    # Sketch30 → Boss-Extrude15 (add)
    with BuildSketch(Plane.XY.offset(22).offset(BOSS_EXTRUDE15_START)):
        Circle(SKETCH30_R)
        Circle(SKETCH30_R_2, mode=Mode.SUBTRACT)
    extrude(amount=BOSS_EXTRUDE15_DEPTH)


solid = part_1.part
